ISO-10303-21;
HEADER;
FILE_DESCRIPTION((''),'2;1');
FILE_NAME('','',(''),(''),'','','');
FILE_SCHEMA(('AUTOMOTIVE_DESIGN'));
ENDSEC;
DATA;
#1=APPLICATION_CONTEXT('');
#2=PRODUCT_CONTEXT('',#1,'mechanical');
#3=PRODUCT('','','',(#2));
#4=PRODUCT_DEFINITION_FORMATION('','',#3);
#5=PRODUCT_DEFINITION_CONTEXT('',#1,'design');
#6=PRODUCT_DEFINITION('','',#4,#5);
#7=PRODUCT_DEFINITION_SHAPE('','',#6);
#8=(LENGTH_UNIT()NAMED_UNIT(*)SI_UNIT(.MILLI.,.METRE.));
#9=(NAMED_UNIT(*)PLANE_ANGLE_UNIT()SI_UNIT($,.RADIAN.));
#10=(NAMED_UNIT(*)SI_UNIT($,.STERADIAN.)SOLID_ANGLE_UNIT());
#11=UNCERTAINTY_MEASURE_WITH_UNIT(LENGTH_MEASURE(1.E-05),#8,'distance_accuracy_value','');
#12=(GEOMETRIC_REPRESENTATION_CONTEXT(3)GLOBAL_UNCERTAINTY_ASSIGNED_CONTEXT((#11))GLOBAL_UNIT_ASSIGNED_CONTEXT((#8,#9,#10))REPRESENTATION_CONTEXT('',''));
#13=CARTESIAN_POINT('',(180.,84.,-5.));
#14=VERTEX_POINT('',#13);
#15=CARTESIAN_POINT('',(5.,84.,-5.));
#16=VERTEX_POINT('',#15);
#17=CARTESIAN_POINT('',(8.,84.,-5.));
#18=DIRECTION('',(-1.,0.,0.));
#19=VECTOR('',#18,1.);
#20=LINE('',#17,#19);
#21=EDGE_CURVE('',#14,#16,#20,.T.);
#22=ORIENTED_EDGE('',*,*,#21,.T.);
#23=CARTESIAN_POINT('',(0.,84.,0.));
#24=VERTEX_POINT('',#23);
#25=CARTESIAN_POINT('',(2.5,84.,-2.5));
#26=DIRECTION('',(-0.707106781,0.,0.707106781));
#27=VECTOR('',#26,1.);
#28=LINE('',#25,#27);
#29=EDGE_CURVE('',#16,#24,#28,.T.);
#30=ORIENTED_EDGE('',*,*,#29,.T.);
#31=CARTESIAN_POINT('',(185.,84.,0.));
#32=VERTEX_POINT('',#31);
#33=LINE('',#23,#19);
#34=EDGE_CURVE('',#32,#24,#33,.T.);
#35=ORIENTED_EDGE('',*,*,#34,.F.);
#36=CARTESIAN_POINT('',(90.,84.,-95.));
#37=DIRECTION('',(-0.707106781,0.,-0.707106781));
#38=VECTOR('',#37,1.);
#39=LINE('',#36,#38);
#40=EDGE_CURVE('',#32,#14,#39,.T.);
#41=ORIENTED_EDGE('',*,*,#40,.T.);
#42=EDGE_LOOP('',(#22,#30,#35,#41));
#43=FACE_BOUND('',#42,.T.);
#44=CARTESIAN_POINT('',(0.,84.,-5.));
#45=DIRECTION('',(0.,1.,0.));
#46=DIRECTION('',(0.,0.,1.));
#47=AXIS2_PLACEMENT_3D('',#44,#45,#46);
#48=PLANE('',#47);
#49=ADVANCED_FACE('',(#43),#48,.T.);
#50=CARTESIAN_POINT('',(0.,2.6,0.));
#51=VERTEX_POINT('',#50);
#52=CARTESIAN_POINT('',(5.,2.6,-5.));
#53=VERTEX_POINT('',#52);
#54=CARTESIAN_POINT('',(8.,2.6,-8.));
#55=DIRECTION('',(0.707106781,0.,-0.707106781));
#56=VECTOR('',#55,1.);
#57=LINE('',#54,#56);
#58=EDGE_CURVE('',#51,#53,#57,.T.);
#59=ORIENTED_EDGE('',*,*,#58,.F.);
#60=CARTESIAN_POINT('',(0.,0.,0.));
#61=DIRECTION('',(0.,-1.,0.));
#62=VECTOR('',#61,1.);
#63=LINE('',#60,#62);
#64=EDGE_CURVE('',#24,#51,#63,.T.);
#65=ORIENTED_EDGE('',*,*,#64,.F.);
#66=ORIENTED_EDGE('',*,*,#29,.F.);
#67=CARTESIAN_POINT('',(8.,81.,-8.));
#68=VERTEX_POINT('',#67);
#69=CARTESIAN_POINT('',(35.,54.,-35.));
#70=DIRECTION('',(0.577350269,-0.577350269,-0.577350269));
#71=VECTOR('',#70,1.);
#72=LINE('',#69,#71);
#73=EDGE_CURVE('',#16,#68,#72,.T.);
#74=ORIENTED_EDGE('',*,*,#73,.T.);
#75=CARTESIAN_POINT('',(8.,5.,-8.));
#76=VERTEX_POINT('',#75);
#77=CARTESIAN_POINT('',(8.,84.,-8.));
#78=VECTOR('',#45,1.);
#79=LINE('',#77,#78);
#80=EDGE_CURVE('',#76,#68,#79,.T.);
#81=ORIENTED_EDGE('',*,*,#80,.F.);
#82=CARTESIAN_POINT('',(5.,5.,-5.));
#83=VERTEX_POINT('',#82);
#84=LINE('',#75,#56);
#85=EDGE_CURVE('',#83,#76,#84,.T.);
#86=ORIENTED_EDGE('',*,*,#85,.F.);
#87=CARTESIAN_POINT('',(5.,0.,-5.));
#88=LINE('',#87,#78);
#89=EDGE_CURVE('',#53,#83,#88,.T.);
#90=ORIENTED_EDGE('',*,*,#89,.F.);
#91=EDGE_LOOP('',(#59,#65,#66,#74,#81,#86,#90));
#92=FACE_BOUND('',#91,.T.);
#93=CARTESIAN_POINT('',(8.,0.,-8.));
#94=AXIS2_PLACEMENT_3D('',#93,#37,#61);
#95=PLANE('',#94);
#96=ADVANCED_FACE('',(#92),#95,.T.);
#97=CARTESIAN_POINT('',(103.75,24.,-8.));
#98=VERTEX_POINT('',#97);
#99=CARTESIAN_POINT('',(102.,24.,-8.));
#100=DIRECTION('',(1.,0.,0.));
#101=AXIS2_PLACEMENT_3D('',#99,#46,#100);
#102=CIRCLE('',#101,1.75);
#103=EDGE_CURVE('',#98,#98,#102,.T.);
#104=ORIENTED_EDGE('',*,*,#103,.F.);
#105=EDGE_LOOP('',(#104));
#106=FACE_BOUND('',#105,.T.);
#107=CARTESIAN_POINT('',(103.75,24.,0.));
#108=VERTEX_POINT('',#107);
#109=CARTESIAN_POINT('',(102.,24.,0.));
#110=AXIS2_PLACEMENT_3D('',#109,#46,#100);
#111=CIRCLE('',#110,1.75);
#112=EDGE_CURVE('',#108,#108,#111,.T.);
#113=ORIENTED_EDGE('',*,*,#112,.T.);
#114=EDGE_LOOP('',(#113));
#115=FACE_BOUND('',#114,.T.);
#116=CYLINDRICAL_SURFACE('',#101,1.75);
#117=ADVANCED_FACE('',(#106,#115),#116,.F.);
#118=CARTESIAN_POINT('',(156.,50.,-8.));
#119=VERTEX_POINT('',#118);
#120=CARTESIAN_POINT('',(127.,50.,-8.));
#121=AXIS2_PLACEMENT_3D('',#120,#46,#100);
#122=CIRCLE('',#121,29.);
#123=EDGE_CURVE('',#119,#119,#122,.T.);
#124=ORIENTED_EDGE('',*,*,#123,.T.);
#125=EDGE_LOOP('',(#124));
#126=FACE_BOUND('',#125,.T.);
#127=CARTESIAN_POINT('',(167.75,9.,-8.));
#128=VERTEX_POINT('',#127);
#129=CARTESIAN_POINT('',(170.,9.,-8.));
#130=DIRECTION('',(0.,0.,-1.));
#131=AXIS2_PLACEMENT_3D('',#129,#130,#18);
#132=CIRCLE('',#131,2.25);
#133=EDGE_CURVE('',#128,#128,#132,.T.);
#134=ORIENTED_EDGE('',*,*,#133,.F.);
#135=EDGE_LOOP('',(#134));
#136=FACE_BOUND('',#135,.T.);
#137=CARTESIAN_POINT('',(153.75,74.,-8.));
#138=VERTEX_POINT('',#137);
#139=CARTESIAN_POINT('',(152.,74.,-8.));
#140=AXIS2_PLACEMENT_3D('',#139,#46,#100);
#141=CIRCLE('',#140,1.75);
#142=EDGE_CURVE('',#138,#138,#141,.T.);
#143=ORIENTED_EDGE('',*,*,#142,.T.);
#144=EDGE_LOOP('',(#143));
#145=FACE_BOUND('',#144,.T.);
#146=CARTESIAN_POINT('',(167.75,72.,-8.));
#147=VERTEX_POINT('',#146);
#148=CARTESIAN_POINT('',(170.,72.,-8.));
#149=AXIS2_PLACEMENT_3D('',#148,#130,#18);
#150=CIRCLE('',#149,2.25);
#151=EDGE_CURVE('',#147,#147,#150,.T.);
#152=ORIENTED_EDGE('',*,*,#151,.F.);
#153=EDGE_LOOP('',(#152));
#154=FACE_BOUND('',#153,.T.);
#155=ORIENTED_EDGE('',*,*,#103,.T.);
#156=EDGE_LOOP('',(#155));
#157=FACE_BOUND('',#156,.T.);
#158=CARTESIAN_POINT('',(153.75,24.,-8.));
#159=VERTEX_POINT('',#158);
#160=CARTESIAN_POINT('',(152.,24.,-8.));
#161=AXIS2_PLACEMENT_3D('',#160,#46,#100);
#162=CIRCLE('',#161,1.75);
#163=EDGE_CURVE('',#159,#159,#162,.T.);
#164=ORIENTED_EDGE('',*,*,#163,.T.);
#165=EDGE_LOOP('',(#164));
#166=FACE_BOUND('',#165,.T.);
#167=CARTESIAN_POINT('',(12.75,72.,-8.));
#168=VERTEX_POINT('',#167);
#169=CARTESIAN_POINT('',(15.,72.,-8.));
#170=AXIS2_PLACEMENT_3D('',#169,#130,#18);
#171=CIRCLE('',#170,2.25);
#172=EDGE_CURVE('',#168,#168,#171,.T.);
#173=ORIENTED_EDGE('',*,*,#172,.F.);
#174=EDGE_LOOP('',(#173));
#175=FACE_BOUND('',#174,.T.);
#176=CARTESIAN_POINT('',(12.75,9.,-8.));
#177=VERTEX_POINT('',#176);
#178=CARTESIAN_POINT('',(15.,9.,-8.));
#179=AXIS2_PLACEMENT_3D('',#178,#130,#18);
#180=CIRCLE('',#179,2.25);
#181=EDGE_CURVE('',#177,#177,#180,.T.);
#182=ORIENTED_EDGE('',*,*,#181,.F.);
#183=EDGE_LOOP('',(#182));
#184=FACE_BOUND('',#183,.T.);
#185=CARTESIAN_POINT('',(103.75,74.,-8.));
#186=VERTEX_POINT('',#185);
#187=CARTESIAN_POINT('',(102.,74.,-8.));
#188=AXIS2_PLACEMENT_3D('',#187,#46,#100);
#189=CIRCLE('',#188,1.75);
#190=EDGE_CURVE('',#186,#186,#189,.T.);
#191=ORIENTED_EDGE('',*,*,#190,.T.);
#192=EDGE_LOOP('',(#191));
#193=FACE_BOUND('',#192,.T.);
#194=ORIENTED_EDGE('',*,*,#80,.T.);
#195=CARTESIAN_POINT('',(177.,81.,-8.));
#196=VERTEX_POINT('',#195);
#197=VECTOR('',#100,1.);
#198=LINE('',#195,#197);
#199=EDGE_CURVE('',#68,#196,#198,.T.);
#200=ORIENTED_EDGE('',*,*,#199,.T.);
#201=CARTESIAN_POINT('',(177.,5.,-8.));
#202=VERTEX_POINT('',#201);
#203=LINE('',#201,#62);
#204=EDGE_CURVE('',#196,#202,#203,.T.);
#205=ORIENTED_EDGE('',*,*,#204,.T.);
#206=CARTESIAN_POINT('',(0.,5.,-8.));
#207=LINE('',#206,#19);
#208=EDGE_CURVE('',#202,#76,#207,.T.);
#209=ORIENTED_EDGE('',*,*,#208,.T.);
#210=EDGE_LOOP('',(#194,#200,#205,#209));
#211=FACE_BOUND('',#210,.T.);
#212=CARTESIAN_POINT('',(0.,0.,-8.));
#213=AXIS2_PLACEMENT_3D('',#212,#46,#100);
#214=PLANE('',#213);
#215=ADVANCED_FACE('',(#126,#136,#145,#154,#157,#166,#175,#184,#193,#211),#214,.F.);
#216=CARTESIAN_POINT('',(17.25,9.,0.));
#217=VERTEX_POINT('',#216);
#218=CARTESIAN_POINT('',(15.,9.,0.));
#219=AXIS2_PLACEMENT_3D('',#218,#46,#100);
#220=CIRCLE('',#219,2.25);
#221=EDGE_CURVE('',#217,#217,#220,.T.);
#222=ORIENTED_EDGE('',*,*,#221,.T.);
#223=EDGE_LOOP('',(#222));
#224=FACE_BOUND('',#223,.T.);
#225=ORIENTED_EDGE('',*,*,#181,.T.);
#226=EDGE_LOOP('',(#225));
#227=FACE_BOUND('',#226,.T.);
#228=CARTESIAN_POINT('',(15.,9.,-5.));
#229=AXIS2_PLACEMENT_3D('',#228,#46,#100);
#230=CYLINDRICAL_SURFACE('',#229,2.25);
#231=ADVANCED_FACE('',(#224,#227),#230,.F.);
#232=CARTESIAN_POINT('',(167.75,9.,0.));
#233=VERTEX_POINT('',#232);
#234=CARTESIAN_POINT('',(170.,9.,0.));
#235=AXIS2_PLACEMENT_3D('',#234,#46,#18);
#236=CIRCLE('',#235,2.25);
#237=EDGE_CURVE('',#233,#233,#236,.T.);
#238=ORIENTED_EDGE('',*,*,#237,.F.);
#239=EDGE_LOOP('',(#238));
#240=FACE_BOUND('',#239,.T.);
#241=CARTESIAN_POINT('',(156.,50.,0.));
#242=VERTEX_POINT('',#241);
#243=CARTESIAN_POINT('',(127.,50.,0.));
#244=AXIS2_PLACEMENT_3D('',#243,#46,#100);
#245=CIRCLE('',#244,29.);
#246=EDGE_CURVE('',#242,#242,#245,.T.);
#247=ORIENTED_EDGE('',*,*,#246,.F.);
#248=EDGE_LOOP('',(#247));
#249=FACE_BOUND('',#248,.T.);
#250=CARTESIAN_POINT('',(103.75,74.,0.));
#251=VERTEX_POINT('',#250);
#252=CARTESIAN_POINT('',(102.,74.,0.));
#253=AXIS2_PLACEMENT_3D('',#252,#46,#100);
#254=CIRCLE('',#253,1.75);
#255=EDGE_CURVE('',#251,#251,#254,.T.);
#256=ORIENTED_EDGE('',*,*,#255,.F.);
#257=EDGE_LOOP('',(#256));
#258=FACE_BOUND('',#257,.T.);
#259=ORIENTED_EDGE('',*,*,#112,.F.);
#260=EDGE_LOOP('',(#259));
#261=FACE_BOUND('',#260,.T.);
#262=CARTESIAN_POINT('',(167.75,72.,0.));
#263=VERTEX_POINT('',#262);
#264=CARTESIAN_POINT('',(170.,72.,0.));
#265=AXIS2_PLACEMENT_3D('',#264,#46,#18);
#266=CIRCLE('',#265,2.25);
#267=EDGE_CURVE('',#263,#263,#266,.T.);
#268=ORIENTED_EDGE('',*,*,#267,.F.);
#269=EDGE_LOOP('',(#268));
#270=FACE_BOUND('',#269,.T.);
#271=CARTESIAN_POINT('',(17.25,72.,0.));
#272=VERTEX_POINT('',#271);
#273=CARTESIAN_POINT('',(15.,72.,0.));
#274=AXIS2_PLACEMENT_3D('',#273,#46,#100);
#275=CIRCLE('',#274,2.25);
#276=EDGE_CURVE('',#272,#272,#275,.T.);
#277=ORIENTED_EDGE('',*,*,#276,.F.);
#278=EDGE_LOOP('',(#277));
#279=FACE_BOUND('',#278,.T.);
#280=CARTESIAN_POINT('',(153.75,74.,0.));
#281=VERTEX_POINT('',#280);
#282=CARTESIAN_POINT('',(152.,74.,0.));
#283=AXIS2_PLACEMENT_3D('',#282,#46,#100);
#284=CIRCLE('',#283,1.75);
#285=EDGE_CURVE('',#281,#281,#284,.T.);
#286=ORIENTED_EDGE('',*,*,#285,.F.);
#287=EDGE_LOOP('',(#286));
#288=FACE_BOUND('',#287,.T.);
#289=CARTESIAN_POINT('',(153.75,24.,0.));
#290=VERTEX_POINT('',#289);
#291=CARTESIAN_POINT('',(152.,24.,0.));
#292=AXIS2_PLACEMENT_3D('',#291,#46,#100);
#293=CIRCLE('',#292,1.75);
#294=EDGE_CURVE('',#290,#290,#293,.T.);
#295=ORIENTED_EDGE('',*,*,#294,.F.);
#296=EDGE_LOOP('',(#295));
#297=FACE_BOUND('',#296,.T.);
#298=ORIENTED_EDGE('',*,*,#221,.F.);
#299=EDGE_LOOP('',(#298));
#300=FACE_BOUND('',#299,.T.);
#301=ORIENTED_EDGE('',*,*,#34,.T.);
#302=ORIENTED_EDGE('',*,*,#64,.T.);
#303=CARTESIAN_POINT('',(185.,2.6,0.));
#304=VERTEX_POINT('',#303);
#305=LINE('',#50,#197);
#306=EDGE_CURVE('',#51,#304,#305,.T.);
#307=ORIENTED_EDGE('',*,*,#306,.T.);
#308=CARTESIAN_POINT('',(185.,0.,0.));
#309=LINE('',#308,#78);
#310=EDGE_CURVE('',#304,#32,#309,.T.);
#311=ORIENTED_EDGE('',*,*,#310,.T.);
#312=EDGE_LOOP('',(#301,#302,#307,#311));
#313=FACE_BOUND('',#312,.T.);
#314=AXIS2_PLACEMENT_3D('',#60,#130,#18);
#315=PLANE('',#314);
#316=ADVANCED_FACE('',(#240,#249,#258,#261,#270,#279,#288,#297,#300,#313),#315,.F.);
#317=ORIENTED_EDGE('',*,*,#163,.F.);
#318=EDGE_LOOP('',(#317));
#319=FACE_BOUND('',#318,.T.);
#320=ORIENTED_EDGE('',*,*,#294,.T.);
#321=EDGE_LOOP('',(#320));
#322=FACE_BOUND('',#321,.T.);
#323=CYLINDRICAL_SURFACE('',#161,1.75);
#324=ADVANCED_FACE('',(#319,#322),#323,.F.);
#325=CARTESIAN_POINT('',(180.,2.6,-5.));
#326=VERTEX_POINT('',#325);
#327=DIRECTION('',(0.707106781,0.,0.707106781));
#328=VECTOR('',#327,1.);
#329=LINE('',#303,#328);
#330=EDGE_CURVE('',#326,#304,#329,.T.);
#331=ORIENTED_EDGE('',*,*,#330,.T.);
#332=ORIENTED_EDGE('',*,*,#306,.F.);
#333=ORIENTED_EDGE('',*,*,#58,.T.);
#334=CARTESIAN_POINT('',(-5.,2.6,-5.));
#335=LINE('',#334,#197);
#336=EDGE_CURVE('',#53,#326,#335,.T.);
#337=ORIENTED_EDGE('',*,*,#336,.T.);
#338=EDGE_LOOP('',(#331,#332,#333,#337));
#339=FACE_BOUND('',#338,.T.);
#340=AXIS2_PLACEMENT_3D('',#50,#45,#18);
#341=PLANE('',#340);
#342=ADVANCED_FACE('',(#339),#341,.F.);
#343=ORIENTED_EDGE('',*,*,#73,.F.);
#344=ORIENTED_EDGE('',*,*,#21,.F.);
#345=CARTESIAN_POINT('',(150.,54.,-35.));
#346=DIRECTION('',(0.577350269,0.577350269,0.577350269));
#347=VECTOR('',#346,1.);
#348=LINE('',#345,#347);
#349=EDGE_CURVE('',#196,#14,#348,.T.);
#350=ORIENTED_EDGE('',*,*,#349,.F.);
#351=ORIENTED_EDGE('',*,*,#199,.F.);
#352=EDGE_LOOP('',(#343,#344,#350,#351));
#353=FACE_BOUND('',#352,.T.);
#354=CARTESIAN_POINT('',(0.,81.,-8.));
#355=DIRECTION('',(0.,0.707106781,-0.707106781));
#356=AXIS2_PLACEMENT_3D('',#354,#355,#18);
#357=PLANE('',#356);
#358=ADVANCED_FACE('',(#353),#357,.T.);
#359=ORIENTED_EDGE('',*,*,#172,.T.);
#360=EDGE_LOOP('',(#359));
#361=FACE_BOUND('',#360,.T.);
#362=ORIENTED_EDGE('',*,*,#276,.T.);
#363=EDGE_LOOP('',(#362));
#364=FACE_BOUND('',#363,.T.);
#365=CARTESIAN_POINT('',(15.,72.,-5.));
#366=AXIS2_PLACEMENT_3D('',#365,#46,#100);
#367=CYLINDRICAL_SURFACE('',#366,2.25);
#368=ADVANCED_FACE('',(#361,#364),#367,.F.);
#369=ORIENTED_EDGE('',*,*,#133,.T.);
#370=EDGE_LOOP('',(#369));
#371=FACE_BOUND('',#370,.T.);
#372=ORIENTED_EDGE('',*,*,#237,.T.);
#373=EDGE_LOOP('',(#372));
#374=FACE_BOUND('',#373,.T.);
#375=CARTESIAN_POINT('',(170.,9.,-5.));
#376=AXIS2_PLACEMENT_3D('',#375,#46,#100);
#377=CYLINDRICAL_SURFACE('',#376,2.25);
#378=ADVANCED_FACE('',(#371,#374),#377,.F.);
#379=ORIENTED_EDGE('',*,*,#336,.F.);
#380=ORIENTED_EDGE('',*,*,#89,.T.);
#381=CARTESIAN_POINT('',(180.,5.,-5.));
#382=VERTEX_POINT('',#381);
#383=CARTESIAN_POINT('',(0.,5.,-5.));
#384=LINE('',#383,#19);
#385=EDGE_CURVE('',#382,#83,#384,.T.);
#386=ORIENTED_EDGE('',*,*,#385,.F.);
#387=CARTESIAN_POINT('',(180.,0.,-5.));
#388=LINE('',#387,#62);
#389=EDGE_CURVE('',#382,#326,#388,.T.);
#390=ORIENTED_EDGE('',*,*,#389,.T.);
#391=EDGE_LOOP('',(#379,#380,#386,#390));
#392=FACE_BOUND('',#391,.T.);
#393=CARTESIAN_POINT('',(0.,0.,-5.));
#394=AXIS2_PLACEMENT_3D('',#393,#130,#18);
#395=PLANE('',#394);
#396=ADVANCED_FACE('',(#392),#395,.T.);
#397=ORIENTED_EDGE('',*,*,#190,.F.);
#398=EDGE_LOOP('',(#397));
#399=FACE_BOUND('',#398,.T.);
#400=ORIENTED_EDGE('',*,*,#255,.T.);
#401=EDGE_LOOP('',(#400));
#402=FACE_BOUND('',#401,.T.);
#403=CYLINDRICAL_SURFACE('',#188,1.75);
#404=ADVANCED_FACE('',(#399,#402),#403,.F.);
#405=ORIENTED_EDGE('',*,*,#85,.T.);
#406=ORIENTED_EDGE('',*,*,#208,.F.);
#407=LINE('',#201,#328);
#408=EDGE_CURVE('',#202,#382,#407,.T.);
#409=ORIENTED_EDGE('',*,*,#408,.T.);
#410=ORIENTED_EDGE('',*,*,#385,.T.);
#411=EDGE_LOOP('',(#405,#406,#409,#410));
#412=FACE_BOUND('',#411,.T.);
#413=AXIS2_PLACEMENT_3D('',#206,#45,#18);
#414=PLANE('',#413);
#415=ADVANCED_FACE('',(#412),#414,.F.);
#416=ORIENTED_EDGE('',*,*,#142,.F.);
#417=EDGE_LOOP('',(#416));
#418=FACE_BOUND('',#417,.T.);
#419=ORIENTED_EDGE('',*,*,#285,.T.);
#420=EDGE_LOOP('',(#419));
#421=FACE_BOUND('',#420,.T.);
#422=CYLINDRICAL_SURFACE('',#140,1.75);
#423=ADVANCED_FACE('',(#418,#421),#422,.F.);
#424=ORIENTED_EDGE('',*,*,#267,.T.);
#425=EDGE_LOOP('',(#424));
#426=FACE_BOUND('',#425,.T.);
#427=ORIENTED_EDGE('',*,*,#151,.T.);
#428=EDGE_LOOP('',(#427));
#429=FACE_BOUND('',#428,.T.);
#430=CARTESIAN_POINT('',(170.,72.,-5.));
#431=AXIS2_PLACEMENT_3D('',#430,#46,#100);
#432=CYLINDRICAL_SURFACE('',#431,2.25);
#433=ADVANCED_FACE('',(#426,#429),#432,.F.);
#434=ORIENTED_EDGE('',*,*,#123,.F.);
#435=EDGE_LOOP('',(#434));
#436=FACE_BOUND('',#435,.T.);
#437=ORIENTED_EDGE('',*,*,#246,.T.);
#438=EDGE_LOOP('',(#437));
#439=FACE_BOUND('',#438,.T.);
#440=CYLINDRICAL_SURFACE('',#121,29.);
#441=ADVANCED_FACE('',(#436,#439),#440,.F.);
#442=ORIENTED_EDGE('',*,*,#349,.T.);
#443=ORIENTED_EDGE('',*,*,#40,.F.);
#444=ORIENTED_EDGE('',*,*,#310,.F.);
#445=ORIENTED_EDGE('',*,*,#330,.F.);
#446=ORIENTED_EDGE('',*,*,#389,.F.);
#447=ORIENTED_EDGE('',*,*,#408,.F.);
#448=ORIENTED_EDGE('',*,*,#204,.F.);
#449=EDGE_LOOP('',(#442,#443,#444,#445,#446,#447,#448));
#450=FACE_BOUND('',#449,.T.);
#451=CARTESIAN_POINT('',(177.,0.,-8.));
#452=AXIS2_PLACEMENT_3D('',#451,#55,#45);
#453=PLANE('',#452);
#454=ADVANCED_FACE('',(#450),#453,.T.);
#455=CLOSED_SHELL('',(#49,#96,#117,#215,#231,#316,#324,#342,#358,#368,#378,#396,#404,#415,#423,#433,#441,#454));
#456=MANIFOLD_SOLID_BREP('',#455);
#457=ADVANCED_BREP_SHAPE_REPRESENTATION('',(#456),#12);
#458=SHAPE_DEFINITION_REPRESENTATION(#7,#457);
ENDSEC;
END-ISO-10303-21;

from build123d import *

# Parameters (mm, degrees)
SKETCH1_W           = 185
SKETCH1_H           = 84
SKETCH1_R           = 2.25
BOSS_EXTRUDE1_DEPTH = 5
SKETCH2_W           = 185
SKETCH2_H           = 79
SKETCH2_R           = 2.25
BOSS_EXTRUDE2_DEPTH = 3
CHAMFER1_SIZE       = 8
CHAMFER3_SIZE       = 3
SKETCH3_W           = 7.071067812
SKETCH3_H           = 2.6
CUT_EXTRUDE1_DEPTH  = 221.270985121
SKETCH4_R           = 29
SKETCH4_R_2         = 1.75
CUT_EXTRUDE2_DEPTH  = 204.334699449


with BuildPart() as part:
    # Sketch1 → Boss-Extrude1 (new body)
    with BuildSketch(Plane.XY):
        with Locations((92.5, 42)):
            Rectangle(SKETCH1_W, SKETCH1_H)
        with Locations((15, 9)):
            Circle(SKETCH1_R, mode=Mode.SUBTRACT)
        with Locations(Location((170, 9, 0), (0, 0, 180))):
            Circle(SKETCH1_R, mode=Mode.SUBTRACT)
        with Locations((15, 72)):
            Circle(SKETCH1_R, mode=Mode.SUBTRACT)
        with Locations(Location((170, 72, 0), (0, 0, 180))):
            Circle(SKETCH1_R, mode=Mode.SUBTRACT)
    extrude(amount=-BOSS_EXTRUDE1_DEPTH)

    # Sketch2 → Boss-Extrude2 (add)
    with BuildSketch(Plane(origin=(0, 0, -5), x_dir=(-1, 0, 0), z_dir=(0, 0, -1))):
        with Locations((-92.5, 44.5)):
            Rectangle(SKETCH2_W, SKETCH2_H)
        with Locations(Location((-15, 9, 0), (0, 0, 180))):
            Circle(SKETCH2_R, mode=Mode.SUBTRACT)
        with Locations((-170, 9)):
            Circle(SKETCH2_R, mode=Mode.SUBTRACT)
        with Locations(Location((-15, 72, 0), (0, 0, 180))):
            Circle(SKETCH2_R, mode=Mode.SUBTRACT)
        with Locations((-170, 72)):
            Circle(SKETCH2_R, mode=Mode.SUBTRACT)
    extrude(amount=BOSS_EXTRUDE2_DEPTH)

    # Chamfer1
    # the kernel refuses this chamfer: 8 mm, written as the material it takes off along each edge
    with BuildSketch(Plane(origin=(185, -15.573463904, -8), x_dir=(-0.9996219169112968, 0, -0.027495876610586296), z_dir=(0, 1, 0)), Plane(origin=(0, 104.573463904, -8), x_dir=(0.9996219169112968, 0, -0.027495876610586275), z_dir=(0, -1, 0))) as chamfer1_piece_1:
        Polygon((CHAMFER1_SIZE * 0.999621916911, CHAMFER1_SIZE * 0.0274958766106), (-CHAMFER1_SIZE * 0.0274958766106, CHAMFER1_SIZE * 0.999621916911), (0, 0), align=None)
    extrude(amount=120.146927807, mode=Mode.SUBTRACT)

    # Chamfer3
    chamfer3_edges = [part.edges().sort_by_distance(p)[0] for p in [
        (92.5, 84, -8),
    ]]
    chamfer(chamfer3_edges, length=CHAMFER3_SIZE)

    # Sketch3 → Cut-Extrude1 (cut, through all, along a direction that is not the sketch's normal)
    with BuildSketch(Plane(origin=(92.5, 0, -92.5), x_dir=(-0.7071067811865452, 0, -0.7071067811865498), z_dir=(0.7071067811865498, 0, -0.7071067811865452))):
        with Locations((-127.279220614, 1.3)):
            Rectangle(SKETCH3_W, SKETCH3_H)
    extrude(amount=-CUT_EXTRUDE1_DEPTH, dir=(1, 0, 0), mode=Mode.SUBTRACT)

    # Sketch4 → Cut-Extrude2 (cut, through all)
    with BuildSketch(Plane.XY):
        with Locations((127, 50)):
            Circle(SKETCH4_R)
        with Locations((102, 74)):
            Circle(SKETCH4_R_2)
        with Locations((152, 74)):
            Circle(SKETCH4_R_2)
        with Locations((152, 24)):
            Circle(SKETCH4_R_2)
        with Locations((102, 24)):
            Circle(SKETCH4_R_2)
    extrude(amount=-CUT_EXTRUDE2_DEPTH, mode=Mode.SUBTRACT)


solid = part.part
